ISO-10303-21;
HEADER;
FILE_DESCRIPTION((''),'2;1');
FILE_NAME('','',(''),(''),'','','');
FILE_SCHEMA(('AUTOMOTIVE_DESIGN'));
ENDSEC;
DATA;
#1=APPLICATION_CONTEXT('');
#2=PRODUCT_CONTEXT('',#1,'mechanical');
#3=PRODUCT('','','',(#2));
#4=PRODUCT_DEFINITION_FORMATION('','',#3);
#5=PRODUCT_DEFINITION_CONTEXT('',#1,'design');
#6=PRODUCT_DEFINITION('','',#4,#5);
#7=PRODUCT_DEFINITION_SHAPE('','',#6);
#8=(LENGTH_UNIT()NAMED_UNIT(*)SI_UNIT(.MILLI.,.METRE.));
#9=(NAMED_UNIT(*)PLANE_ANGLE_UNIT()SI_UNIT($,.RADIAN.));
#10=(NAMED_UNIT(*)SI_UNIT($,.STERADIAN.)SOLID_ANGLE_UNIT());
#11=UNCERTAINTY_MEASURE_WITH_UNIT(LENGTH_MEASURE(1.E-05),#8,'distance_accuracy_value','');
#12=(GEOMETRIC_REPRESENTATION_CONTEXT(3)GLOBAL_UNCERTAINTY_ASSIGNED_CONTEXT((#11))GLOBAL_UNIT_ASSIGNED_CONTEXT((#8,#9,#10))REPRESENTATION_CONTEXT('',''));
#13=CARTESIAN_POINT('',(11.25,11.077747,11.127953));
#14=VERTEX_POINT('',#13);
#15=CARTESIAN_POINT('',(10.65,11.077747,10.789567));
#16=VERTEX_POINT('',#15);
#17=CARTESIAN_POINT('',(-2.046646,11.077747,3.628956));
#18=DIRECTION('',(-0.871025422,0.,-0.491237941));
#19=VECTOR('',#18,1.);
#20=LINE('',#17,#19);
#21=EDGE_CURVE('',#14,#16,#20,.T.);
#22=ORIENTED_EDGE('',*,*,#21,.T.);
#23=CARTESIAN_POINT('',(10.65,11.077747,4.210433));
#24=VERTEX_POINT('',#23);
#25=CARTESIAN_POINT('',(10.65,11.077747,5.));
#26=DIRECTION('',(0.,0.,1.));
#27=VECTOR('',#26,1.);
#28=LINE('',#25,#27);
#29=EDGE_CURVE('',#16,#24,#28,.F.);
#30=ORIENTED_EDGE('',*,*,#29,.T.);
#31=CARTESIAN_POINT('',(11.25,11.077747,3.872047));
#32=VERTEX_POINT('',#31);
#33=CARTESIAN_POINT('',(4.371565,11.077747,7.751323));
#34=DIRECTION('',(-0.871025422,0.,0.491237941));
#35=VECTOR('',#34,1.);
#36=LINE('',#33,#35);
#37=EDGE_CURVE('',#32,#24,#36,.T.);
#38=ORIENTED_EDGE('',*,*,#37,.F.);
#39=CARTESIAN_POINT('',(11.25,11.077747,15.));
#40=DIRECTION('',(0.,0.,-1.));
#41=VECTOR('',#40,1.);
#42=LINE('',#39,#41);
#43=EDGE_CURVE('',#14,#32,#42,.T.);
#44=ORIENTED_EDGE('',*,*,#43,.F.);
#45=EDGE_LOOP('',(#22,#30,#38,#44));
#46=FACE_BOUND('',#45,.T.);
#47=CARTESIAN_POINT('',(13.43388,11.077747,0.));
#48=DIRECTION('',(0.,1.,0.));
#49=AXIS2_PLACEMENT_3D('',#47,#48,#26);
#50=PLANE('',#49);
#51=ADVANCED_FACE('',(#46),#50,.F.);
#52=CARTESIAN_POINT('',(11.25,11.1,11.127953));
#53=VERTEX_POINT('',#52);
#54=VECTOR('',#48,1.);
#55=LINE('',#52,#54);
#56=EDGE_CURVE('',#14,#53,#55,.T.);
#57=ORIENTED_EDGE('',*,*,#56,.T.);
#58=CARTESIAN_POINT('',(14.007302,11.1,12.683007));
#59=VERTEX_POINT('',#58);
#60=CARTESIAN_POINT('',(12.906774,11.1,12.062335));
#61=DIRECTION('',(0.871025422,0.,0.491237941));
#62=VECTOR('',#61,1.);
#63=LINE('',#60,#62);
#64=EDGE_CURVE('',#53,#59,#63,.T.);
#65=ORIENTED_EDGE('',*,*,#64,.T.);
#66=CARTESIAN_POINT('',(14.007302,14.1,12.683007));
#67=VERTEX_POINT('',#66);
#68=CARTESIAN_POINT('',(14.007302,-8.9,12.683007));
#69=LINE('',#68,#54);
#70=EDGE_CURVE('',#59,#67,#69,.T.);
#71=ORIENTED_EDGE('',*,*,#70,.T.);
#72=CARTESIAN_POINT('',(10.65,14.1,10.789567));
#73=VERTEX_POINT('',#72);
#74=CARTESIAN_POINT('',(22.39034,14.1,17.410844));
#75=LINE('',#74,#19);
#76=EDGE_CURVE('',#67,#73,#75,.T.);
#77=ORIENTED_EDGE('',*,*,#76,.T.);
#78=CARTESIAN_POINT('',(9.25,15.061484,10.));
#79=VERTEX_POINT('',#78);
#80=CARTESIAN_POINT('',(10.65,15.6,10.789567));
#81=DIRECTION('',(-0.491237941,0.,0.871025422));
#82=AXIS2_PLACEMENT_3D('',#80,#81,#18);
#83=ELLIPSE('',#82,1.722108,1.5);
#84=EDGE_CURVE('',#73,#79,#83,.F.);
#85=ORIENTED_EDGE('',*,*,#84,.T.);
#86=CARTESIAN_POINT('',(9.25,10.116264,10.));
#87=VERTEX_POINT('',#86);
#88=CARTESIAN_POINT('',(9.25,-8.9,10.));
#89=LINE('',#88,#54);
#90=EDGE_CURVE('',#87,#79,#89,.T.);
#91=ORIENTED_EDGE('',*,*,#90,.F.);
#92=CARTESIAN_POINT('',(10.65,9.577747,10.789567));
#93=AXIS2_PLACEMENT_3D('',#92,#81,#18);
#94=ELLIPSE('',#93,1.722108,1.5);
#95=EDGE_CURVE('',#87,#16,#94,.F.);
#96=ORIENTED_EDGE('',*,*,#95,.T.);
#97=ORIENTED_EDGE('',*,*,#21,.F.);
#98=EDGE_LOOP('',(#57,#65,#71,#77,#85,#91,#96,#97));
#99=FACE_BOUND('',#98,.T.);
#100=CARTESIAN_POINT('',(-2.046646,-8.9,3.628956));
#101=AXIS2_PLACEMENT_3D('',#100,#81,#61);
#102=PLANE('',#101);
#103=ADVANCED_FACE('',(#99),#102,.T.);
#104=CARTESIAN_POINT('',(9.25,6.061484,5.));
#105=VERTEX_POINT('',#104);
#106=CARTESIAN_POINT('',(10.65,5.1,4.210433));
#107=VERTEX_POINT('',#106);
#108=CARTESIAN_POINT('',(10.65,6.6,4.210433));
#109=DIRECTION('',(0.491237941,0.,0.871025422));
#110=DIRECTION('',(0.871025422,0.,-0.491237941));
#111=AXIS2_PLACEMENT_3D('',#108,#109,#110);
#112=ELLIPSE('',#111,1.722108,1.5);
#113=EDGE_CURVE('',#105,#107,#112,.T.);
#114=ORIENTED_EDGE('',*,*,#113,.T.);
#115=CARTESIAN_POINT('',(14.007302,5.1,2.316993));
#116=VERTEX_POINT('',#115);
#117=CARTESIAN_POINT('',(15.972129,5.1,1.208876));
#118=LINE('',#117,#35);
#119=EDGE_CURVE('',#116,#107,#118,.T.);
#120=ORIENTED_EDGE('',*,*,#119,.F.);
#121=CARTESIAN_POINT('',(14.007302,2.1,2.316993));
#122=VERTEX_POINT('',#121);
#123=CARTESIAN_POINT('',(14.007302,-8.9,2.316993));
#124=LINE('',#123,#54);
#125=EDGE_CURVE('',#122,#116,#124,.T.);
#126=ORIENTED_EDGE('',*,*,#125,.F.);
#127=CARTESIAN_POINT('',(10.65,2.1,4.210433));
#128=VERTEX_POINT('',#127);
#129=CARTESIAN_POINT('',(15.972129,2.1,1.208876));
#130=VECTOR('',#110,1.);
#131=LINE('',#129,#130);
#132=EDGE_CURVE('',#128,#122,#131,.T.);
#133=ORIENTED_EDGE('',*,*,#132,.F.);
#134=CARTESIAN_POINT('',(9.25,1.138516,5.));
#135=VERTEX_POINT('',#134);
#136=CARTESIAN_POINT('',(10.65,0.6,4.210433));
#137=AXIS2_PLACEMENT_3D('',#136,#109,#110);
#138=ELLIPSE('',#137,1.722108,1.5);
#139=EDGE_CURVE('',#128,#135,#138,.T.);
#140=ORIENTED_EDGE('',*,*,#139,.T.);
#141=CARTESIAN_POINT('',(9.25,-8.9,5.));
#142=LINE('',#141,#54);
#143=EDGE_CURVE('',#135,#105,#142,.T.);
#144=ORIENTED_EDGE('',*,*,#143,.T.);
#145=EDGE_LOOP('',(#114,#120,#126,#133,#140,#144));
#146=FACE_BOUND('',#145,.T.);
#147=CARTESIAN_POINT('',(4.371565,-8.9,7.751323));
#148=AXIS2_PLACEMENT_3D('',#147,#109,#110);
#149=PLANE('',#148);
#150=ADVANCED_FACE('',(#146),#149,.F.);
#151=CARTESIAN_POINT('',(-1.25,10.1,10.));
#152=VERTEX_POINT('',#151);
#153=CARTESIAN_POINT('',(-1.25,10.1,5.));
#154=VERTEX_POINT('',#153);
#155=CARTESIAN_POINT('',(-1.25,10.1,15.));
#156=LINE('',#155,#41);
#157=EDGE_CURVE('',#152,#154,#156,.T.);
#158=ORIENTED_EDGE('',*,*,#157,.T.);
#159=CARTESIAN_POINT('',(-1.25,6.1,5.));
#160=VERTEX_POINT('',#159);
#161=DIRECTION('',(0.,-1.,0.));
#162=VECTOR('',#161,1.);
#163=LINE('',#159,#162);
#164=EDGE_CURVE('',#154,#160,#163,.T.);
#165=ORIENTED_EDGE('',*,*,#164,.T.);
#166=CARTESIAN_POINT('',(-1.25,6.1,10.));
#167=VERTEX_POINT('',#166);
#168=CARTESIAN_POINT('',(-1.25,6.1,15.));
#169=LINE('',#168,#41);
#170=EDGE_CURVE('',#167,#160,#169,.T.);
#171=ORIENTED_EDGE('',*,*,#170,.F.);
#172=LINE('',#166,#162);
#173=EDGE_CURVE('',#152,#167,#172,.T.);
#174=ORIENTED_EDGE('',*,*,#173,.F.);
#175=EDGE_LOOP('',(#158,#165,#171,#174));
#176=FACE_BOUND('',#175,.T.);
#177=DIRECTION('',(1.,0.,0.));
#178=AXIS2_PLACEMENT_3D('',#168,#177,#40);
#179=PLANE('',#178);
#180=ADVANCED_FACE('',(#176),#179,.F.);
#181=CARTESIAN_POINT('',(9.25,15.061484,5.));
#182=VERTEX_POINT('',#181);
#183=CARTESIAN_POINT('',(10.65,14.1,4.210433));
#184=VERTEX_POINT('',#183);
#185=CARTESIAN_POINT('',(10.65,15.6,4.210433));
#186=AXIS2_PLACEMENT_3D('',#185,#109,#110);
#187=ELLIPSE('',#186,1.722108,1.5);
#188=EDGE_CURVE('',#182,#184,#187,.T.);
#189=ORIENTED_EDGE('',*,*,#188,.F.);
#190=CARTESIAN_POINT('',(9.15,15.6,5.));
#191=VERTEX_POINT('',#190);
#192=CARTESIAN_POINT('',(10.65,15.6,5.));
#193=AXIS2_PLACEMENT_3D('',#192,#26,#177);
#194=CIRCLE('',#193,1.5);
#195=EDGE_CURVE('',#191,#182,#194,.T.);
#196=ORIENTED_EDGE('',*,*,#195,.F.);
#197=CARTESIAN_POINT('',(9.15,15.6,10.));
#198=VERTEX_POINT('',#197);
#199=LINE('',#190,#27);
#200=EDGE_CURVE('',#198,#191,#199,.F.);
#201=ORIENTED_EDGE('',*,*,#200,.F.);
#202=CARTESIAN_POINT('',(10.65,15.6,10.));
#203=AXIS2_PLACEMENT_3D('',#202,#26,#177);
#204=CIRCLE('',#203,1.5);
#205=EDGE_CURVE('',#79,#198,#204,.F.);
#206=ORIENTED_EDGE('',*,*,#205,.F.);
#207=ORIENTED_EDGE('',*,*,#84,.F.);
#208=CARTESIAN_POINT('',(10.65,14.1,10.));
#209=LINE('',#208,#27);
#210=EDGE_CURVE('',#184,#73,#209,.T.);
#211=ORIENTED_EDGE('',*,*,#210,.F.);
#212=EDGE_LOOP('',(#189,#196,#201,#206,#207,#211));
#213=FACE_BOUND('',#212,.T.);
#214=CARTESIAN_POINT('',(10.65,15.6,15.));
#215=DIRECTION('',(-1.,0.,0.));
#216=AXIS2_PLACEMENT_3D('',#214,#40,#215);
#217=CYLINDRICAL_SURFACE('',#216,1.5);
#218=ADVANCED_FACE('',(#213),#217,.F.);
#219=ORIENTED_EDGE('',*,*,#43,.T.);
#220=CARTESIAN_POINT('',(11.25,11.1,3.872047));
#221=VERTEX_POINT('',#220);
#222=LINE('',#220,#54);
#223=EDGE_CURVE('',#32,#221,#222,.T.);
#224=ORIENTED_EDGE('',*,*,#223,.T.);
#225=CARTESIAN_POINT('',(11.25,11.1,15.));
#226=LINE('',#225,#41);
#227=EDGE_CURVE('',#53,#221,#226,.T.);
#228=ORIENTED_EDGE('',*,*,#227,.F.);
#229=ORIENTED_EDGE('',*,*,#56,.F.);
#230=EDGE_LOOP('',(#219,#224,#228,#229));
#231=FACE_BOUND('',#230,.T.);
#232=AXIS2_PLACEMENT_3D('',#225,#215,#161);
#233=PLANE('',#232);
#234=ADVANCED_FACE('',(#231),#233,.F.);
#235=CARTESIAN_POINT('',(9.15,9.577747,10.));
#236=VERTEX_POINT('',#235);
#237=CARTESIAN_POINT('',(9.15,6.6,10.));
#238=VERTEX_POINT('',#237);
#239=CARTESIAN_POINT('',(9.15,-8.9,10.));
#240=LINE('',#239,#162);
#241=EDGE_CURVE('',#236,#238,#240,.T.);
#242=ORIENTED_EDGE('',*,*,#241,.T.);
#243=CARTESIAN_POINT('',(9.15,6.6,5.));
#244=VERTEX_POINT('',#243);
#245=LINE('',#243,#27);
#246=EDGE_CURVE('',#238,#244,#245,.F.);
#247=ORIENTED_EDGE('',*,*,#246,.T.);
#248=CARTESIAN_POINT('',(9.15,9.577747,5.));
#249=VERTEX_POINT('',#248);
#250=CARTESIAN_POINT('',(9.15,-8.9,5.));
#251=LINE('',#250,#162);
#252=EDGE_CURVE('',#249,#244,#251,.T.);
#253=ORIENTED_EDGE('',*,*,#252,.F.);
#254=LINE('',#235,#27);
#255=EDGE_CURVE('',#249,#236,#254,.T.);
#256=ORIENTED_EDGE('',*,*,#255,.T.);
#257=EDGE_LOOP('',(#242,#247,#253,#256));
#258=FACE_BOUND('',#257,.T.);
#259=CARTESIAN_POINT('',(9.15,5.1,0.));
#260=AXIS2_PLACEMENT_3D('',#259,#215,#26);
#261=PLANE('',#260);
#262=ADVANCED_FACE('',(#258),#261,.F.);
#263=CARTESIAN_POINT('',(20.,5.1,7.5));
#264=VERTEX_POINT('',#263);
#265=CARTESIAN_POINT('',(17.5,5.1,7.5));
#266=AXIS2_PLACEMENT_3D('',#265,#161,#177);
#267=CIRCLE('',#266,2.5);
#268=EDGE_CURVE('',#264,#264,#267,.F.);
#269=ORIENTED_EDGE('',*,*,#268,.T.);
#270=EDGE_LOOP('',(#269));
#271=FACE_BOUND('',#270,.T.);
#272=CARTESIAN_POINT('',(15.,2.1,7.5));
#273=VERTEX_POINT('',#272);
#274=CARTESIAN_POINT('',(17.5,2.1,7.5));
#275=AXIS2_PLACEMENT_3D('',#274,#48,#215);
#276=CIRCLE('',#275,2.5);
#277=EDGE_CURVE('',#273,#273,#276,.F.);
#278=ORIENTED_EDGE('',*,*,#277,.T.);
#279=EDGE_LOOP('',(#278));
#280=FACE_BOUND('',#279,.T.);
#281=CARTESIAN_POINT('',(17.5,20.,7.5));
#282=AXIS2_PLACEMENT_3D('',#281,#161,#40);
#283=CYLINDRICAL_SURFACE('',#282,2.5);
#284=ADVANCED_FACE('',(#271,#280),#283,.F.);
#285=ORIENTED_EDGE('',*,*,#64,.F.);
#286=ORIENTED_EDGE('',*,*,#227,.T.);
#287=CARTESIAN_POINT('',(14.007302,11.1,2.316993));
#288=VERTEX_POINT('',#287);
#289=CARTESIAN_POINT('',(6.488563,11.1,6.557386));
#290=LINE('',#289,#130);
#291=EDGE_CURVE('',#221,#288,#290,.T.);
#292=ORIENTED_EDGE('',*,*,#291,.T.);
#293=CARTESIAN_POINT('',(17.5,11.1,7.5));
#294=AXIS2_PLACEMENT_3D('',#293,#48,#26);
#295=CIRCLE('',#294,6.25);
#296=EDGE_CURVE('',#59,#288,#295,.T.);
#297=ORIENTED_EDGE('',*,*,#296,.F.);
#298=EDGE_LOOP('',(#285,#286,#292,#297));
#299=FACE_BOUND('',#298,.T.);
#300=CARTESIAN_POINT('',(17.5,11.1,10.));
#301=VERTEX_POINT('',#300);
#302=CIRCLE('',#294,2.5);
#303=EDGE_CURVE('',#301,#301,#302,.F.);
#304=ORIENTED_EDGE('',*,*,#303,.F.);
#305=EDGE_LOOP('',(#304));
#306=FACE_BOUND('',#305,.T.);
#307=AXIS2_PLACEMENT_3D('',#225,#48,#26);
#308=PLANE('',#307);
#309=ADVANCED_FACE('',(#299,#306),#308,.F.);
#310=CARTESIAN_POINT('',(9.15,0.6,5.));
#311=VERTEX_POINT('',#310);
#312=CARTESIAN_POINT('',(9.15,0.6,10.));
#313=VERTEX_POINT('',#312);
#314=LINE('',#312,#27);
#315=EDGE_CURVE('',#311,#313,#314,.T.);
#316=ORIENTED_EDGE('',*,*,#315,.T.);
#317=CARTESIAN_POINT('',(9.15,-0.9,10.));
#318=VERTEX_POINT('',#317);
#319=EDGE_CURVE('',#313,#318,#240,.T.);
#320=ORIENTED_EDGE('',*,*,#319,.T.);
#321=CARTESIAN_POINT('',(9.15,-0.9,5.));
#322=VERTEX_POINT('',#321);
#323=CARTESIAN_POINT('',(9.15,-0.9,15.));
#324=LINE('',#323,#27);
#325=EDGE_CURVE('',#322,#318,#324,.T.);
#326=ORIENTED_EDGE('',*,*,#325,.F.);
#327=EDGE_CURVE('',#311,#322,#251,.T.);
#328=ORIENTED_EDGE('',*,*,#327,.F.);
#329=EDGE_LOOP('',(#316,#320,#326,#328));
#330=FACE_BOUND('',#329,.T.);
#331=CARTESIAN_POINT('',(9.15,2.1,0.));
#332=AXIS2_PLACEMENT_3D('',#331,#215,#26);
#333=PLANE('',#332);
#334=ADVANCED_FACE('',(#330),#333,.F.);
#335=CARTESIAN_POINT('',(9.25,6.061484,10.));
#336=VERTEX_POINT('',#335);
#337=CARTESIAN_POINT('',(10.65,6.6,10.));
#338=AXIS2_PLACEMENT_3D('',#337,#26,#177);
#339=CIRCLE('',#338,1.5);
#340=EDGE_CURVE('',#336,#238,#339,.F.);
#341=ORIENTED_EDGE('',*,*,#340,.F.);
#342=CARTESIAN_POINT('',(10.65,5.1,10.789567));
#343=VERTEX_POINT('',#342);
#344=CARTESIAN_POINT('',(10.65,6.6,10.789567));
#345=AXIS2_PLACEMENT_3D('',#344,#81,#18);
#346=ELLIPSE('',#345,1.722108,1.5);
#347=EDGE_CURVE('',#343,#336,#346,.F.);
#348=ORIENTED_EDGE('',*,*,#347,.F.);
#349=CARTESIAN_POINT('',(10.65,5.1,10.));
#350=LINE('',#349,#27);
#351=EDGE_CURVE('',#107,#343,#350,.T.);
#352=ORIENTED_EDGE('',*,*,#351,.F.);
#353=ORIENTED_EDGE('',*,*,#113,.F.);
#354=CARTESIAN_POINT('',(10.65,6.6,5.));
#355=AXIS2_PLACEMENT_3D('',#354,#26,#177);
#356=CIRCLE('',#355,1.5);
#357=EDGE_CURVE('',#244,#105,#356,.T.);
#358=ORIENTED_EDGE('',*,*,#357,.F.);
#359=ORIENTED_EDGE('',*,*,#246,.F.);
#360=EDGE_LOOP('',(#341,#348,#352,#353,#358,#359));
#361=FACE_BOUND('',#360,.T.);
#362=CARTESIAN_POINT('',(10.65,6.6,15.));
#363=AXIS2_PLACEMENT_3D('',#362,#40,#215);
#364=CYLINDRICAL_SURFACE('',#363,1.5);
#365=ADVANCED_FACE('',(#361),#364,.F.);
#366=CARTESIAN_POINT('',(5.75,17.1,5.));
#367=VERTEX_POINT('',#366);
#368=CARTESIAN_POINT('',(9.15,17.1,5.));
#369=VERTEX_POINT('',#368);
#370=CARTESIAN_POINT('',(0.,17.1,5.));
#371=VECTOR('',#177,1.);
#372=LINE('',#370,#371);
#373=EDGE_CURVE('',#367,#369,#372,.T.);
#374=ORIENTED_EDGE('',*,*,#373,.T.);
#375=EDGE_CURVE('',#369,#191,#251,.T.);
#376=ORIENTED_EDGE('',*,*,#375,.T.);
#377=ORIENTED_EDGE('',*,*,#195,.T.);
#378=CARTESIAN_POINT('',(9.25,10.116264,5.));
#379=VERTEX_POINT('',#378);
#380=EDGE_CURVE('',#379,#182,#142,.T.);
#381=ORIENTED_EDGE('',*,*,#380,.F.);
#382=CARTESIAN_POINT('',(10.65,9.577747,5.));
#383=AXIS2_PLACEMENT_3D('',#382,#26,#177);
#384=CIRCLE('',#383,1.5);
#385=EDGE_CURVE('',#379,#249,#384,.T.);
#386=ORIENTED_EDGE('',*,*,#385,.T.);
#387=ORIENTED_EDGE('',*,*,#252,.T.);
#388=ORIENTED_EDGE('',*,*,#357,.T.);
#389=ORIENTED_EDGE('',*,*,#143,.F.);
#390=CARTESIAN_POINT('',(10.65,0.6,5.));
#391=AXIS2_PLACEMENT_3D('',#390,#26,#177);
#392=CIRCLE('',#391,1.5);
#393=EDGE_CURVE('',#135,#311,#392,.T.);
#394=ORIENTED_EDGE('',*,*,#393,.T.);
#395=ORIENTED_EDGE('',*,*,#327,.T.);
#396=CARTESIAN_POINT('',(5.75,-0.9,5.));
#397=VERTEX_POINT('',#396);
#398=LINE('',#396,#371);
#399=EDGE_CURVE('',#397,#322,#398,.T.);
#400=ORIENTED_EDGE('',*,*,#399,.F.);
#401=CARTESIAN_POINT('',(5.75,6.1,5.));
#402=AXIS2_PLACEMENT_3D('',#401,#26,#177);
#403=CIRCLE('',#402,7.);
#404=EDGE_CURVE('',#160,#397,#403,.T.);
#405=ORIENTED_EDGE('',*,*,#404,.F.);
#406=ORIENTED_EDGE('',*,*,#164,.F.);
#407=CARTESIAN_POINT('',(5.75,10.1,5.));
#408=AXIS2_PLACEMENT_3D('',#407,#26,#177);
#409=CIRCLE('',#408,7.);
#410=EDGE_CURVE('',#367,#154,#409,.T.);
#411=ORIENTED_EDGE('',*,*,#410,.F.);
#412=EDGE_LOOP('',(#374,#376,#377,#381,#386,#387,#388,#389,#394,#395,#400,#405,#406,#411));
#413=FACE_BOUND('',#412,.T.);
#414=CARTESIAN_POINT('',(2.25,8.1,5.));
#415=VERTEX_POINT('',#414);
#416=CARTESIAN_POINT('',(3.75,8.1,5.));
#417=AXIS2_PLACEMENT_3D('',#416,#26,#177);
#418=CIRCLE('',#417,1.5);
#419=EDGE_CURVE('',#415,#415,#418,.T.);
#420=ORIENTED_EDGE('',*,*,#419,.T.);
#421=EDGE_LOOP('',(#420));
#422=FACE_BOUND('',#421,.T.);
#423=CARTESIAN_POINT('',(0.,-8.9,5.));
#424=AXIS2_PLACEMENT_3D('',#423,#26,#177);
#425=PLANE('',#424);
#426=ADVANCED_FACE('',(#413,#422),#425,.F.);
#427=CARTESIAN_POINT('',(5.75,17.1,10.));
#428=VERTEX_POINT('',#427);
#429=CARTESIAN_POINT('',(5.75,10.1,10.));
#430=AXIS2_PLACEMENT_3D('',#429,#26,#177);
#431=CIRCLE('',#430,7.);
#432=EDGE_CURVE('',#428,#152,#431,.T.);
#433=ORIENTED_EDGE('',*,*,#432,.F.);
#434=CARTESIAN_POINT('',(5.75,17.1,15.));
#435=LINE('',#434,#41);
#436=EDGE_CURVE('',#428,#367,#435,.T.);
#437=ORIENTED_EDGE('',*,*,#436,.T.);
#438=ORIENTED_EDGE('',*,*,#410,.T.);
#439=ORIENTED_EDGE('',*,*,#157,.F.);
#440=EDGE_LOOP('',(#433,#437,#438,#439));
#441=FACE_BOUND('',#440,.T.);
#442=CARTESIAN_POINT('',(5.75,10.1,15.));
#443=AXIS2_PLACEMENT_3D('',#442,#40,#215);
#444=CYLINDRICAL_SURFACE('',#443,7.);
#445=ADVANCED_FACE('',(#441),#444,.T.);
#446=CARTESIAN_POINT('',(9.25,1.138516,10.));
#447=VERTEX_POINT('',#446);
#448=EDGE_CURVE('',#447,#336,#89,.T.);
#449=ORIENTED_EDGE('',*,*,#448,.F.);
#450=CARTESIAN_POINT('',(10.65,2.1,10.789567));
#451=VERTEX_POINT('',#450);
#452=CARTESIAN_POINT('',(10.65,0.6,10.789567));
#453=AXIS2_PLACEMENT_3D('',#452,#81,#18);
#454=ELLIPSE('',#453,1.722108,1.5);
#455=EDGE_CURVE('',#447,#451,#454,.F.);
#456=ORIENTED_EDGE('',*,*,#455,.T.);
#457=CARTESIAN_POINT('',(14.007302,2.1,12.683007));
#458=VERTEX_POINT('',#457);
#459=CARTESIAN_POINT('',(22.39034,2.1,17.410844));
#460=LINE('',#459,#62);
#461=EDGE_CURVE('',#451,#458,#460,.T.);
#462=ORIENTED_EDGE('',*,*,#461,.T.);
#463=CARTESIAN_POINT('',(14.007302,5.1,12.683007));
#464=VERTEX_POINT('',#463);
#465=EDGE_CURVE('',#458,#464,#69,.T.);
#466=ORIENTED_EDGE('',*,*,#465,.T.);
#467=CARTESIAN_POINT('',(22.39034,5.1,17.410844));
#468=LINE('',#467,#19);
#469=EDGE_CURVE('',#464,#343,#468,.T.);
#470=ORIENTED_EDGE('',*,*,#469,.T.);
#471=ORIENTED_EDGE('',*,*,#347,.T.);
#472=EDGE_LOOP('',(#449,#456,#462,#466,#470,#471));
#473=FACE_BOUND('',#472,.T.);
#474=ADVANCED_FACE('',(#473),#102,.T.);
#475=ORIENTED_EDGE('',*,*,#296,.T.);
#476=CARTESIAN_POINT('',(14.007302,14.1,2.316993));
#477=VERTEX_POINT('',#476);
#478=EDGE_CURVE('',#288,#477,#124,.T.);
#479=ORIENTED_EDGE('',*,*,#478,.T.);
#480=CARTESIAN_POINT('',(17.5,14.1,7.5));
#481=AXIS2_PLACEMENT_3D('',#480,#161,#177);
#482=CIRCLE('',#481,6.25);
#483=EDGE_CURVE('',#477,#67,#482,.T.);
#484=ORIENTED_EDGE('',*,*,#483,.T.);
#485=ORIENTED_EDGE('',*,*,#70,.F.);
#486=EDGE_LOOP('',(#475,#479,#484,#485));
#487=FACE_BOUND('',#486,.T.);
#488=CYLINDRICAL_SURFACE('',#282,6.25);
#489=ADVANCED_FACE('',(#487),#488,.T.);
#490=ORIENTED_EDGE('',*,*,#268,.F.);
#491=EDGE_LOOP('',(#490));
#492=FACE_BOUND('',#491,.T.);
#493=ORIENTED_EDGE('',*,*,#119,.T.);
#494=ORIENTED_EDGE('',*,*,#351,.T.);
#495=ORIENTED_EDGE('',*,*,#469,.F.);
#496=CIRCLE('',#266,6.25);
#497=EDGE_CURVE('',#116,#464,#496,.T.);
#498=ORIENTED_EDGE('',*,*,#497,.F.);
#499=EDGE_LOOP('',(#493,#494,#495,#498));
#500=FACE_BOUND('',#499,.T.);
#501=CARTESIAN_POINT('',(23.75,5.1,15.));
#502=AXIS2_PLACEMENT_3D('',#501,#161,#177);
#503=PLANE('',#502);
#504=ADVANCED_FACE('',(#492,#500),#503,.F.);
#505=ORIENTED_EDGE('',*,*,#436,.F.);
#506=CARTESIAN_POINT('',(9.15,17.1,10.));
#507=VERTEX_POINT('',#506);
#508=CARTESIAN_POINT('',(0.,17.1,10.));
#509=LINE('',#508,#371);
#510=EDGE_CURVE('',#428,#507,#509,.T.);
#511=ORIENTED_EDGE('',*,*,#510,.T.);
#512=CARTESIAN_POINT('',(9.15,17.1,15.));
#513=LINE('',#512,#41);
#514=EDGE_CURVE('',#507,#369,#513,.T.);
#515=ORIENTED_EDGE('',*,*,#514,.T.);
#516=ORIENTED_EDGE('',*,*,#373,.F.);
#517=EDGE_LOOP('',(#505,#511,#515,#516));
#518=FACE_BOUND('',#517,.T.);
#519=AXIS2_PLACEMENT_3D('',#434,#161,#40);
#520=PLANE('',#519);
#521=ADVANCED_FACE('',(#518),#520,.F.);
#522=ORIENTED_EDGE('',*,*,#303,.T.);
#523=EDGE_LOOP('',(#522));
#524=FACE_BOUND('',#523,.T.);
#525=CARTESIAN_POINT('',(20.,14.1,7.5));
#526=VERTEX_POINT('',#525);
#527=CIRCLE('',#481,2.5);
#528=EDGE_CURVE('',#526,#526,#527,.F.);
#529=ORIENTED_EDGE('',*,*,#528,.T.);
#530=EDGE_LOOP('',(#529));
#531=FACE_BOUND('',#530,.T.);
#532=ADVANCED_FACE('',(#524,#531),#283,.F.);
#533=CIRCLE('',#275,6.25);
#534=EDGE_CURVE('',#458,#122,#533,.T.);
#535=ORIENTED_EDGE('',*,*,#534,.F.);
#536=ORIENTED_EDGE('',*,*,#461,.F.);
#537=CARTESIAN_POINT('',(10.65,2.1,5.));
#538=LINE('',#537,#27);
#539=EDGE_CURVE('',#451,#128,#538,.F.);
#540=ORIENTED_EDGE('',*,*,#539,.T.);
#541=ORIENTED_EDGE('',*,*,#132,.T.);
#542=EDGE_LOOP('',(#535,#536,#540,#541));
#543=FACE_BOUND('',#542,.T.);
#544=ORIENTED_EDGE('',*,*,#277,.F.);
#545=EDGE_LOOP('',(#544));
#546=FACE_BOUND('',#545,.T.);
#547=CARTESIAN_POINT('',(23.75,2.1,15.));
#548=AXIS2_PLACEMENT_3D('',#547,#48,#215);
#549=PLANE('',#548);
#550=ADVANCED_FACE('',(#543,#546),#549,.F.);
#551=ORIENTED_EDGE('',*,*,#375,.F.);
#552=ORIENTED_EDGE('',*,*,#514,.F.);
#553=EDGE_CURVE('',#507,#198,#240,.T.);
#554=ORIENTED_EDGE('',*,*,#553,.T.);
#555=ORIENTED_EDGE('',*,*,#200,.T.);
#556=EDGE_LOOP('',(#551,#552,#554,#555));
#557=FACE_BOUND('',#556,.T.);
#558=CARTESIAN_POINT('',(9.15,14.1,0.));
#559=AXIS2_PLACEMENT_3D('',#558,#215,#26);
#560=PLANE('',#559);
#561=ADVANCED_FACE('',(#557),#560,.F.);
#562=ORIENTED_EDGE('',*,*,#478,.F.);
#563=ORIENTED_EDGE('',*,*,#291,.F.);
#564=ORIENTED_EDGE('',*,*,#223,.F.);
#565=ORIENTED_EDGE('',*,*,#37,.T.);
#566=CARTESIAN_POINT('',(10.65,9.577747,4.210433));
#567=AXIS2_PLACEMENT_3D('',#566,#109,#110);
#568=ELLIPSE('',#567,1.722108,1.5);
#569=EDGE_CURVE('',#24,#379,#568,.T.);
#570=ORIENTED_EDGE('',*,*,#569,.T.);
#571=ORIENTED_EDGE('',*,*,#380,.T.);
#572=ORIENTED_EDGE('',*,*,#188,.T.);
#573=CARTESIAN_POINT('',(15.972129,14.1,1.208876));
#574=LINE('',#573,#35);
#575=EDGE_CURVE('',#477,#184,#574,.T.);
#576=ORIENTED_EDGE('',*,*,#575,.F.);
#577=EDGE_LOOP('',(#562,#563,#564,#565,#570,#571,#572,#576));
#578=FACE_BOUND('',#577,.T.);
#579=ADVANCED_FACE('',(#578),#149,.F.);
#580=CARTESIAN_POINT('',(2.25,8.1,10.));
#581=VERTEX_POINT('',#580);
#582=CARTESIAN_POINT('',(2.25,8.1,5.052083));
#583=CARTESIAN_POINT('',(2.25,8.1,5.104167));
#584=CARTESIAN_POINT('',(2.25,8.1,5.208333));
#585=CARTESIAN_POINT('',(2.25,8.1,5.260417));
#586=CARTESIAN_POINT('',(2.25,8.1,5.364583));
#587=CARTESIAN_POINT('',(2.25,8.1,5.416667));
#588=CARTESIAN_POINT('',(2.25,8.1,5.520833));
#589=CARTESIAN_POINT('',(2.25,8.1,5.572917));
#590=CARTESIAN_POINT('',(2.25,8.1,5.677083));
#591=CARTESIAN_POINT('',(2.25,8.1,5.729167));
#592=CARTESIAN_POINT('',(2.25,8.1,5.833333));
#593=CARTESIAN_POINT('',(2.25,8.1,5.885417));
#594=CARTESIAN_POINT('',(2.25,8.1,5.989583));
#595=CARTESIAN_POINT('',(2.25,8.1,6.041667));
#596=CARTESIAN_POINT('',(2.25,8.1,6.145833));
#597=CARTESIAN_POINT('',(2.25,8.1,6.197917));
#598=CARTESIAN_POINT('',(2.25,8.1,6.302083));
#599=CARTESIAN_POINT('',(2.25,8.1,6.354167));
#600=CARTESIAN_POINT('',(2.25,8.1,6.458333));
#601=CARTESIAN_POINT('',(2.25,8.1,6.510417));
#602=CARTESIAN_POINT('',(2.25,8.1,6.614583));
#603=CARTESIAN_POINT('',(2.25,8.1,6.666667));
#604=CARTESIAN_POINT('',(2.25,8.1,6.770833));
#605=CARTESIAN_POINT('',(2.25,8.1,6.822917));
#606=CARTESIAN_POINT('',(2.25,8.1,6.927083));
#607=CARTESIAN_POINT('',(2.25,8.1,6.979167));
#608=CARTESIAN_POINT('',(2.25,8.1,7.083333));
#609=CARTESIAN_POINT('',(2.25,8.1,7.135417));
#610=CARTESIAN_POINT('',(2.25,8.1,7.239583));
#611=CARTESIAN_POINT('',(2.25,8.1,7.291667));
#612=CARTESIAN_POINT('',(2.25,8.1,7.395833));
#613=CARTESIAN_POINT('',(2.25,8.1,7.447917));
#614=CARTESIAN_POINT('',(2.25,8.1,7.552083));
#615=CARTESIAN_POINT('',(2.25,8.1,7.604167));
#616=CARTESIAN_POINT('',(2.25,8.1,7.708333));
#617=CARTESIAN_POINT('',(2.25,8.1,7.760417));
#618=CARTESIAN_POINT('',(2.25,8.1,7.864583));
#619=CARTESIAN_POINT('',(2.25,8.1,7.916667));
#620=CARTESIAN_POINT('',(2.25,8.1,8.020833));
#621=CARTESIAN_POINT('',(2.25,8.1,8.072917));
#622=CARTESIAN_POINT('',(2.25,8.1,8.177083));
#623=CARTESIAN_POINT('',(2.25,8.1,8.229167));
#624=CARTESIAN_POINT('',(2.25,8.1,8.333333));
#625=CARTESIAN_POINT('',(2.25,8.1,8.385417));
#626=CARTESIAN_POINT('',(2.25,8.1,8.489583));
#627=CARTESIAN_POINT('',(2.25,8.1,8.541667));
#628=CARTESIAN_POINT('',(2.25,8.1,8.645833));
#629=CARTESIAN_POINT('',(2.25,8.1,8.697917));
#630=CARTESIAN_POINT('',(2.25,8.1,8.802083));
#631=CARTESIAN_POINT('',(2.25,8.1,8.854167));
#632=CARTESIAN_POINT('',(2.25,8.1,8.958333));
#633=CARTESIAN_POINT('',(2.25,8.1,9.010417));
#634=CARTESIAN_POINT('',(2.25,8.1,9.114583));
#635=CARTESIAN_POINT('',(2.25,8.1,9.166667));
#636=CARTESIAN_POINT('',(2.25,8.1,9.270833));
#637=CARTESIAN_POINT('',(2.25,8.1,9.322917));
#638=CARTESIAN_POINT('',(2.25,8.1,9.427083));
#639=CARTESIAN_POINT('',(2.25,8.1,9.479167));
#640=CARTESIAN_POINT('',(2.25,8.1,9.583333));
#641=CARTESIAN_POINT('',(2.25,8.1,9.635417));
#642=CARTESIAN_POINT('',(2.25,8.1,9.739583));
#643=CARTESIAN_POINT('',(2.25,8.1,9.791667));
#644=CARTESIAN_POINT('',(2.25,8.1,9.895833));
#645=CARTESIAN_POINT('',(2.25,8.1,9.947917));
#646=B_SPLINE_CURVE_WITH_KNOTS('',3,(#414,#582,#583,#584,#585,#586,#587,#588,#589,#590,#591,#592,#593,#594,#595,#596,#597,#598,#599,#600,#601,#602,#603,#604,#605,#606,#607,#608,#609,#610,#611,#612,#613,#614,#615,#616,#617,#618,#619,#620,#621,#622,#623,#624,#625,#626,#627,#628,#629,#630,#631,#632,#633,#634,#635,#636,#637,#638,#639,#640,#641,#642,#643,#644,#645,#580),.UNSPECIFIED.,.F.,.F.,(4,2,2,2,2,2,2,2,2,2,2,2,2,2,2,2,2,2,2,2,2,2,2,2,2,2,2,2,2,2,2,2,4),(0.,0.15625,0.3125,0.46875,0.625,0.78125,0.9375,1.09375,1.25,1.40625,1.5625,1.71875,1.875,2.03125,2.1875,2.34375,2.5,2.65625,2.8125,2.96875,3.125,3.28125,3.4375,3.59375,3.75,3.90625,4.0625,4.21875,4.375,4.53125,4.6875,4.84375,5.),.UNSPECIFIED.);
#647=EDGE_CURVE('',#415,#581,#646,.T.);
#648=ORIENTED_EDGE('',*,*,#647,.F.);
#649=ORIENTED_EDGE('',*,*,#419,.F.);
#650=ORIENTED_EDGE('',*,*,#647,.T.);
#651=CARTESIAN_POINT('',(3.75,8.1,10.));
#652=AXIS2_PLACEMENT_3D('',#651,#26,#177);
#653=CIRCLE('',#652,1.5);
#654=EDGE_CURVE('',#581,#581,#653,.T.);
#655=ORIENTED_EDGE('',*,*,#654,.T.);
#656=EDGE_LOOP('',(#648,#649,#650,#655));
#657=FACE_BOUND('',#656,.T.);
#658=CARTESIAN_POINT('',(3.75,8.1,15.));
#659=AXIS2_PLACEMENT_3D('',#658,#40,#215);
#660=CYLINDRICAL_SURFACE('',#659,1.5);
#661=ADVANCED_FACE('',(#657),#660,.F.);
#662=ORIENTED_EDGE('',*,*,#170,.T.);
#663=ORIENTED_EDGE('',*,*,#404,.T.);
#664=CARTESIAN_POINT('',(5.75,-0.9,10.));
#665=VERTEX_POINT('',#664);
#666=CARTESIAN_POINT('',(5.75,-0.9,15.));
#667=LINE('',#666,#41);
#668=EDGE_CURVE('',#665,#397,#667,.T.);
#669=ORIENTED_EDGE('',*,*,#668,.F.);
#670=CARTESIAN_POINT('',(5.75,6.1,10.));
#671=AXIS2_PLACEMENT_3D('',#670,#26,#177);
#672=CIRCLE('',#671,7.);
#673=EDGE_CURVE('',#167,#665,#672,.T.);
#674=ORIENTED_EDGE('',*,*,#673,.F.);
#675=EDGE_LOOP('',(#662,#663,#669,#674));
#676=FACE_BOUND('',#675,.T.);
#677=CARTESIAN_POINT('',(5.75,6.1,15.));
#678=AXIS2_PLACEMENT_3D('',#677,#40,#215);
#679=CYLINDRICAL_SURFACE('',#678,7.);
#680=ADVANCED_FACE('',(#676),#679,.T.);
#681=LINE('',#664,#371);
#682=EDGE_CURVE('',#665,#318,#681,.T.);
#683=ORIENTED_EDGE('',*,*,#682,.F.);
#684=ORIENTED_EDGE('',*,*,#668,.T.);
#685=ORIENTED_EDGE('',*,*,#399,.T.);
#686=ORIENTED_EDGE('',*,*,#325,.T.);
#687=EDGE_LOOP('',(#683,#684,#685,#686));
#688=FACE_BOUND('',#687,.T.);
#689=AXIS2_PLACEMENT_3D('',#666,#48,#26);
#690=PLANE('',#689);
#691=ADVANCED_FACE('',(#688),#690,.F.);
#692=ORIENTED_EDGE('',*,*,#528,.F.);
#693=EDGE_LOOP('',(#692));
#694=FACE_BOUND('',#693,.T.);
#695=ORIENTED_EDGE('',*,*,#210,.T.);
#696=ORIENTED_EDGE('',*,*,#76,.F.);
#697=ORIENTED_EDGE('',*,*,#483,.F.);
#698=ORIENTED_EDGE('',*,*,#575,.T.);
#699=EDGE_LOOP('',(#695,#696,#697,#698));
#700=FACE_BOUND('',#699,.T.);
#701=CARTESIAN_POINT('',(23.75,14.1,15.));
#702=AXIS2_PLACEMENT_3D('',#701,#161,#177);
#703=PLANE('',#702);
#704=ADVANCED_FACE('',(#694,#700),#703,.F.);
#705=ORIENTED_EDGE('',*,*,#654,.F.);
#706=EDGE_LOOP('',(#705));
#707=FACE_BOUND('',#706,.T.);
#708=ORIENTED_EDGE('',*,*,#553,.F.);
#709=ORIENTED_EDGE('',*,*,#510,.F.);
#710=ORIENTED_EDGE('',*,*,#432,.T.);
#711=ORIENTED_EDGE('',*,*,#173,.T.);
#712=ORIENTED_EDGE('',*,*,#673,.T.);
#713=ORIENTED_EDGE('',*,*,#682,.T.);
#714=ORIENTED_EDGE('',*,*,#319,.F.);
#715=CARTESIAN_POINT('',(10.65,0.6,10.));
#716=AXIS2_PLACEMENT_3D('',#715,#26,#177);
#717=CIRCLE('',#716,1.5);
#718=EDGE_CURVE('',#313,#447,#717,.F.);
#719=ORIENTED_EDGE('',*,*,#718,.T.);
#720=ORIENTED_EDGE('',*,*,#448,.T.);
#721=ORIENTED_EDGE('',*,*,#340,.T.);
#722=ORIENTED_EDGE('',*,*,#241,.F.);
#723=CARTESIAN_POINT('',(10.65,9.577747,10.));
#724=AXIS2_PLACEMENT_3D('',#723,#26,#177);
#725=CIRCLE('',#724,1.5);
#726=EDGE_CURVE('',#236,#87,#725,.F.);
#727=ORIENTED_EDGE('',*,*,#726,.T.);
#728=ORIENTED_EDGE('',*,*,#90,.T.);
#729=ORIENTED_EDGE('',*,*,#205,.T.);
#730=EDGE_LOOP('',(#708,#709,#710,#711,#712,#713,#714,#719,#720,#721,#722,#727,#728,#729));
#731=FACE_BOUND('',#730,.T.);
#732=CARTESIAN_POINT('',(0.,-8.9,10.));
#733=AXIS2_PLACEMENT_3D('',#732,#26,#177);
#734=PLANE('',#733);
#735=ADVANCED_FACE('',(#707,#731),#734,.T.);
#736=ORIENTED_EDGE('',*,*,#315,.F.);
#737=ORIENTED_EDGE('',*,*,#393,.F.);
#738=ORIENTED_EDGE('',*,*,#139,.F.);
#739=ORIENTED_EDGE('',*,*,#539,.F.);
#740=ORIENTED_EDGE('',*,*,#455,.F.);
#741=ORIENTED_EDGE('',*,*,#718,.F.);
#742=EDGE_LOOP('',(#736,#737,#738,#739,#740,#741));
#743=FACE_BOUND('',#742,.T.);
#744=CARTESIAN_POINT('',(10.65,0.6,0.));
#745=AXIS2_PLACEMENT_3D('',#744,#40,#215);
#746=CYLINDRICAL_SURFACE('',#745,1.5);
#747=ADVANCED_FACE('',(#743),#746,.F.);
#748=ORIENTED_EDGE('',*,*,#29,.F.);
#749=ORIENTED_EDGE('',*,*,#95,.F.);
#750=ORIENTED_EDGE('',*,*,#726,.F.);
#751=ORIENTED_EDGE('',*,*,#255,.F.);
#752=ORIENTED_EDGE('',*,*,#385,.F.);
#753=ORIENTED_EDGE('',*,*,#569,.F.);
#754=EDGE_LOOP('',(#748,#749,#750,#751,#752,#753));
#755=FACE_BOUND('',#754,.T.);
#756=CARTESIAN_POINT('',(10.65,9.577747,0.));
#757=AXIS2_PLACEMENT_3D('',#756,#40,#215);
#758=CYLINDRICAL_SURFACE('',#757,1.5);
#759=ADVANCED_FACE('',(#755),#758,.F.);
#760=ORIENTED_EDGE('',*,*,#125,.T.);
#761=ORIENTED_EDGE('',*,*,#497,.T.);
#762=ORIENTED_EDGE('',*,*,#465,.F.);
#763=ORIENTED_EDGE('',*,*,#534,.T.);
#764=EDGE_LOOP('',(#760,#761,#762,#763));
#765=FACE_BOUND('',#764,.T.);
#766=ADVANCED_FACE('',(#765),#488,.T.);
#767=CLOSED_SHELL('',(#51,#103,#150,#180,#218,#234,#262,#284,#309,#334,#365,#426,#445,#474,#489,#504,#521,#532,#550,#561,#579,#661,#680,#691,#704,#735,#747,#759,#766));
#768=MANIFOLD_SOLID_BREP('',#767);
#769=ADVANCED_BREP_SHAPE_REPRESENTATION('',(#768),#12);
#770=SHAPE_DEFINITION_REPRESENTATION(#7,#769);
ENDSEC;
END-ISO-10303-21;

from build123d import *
from build123d.topology import SkipClean

# Parameters (mm, degrees)
CROQUIS1_R              = 1.5
SALIENTE_EXTRUIR1_DEPTH = 15
CROQUIS2_R              = 2.5
CORTAR_EXTRUIR1_DEPTH   = 20
CORTAR_EXTRUIR2_START   = -26
CORTAR_EXTRUIR2_DEPTH   = 26
CROQUIS5_W              = 3.971897385
CROQUIS5_H              = 3.395681121
CROQUIS5_W_2            = 4.283880282
CROQUIS5_H_2            = 5.977747231
CROQUIS5_W_3            = 4.50146752
CROQUIS5_H_3            = 3.991827506
CORTAR_EXTRUIR5_DEPTH   = 10
REDONDEO1_R             = 1.5


with BuildPart() as part:
    # Croquis1 → Saliente-Extruir1 (new body)
    with BuildSketch(Plane.XY):
        with BuildLine():
            Line((11.25, 17.1), (11.25, 14.1))
            Line((11.25, 14.1), (23.75, 14.1))
            Line((23.75, 14.1), (23.75, 11.1))
            Line((23.75, 11.1), (11.25, 11.1))
            Line((11.25, 11.1), (11.25, 5.1))
            Line((11.25, 5.1), (23.75, 5.1))
            Line((23.75, 5.1), (23.75, 2.1))
            Line((23.75, 2.1), (11.25, 2.1))
            Line((11.25, 2.1), (11.25, -0.9))
            Line((11.25, -0.9), (5.75, -0.9))
            ThreePointArc((5.75, -0.9), (0.800252532, 1.150252532), (-1.25, 6.1))
            Line((-1.25, 6.1), (-1.25, 10.1))
            ThreePointArc((-1.25, 10.1), (0.800252532, 15.049747468), (5.75, 17.1))
            Line((5.75, 17.1), (11.25, 17.1))
        make_face()
        with Locations((3.75, 8.1)):
            Circle(CROQUIS1_R, mode=Mode.SUBTRACT)
    extrude(amount=SALIENTE_EXTRUIR1_DEPTH)

    # Croquis2 → Cortar-Extruir1 (cut)
    with BuildSketch(Plane(origin=(0, 0, 0), x_dir=(1, 0, 0), z_dir=(0, 1, 0))):
        with Locations((17.5, -7.5)):
            Circle(CROQUIS2_R)
        with BuildLine():
            Line((17.5, -1.25), (11.25, 0))
            Line((11.25, 0), (11.126279301, 1.868603497))
            Line((11.126279301, 1.868603497), (29.663453957, 1.868603497))
            Line((29.663453957, 1.868603497), (29.663453957, -17.961269996))
            Line((29.663453957, -17.961269996), (11.25, -17.961269996))
            Line((11.25, -17.961269996), (11.25, -15))
            Line((11.25, -15), (17.5, -13.75))
            ThreePointArc((17.5, -13.75), (23.75, -7.5), (17.5, -1.25))
        make_face()
    extrude(amount=CORTAR_EXTRUIR1_DEPTH, mode=Mode.SUBTRACT)

    # Croquis4 → Cortar-Extruir2 (cut)
    with SkipClean():  # the faces are left unmerged after this step: merging them gives an invalid solid
        with BuildSketch(Plane(origin=(0, 17.1, 0), x_dir=(1, 0, 0), z_dir=(0, 1, 0)).offset(CORTAR_EXTRUIR2_START)):
            with BuildLine():
                Line((-4.389645589, -10), (9.25, -10))
                Line((9.25, -10), (14.007302121, -12.683006997))
                ThreePointArc((14.007302121, -12.683006997), (15.673978879, -13.477302641), (17.5, -13.75))
                Line((17.5, -13.75), (17.5, -16.45653889))
                Line((17.5, -16.45653889), (-4.389645589, -16.45653889))
                Line((-4.389645589, -16.45653889), (-4.389645589, -10))
            make_face()
            with BuildLine():
                Line((9.25, -5), (14.007302121, -2.316993003))
                ThreePointArc((14.007302121, -2.316993003), (15.673978879, -1.522697359), (17.5, -1.25))
                Line((17.5, -1.25), (17.5, 1.887707064))
                Line((17.5, 1.887707064), (-4.389645589, 1.887707064))
                Line((-4.389645589, 1.887707064), (-4.389645589, -5))
                Line((-4.389645589, -5), (9.25, -5))
            make_face()
        extrude(amount=CORTAR_EXTRUIR2_DEPTH, mode=Mode.SUBTRACT)

    # Croquis5 → Cortar-Extruir5 (cut, symmetric)
    with SkipClean():  # the faces are left unmerged after this step: merging them gives an invalid solid
        with BuildSketch(Plane.XY.offset(10)):
            with Locations((11.135948693, 15.797840561)):
                Rectangle(CROQUIS5_W, CROQUIS5_H)
            with Locations((11.291940141, 8.088873616)):
                Rectangle(CROQUIS5_W_2, CROQUIS5_H_2)
            with Locations((11.40073376, 0.104086247)):
                Rectangle(CROQUIS5_W_3, CROQUIS5_H_3)
        extrude(amount=CORTAR_EXTRUIR5_DEPTH, both=True, mode=Mode.SUBTRACT)

    # Redondeo1
    # the kernel refuses this fillet: 1.5 mm, written as the material it adds along each edge
    with BuildSketch(Plane(origin=(9.15, 2.1, 1.25), x_dir=(0, -1, 0), z_dir=(0, 0, 1))) as redondeo1_piece_1_section:
        with BuildLine():
            CenterArc((REDONDEO1_R, REDONDEO1_R), REDONDEO1_R, 180, 90)
            Line((0, REDONDEO1_R), (0, 0))
            Line((0, 0), (REDONDEO1_R, 0))
        make_face()
    redondeo1_piece_1 = extrude(amount=8.75, mode=Mode.PRIVATE)
    redondeo1_piece_1 = split(redondeo1_piece_1, bisect_by=Plane(origin=(9.866987005, 1.973706672, 5), z_dir=(0, 0, -1)), keep=Keep.TOP, mode=Mode.PRIVATE)
    redondeo1_piece_1 = split(redondeo1_piece_1, bisect_by=Plane(origin=(9.792542983, 1.973706672, 4.694018462), z_dir=(0.4912379413342998, 0, 0.8710254215541813)), keep=Keep.TOP, mode=Mode.PRIVATE)
    add(redondeo1_piece_1)
    with BuildSketch(Plane(origin=(9.15, 2.1, 5), x_dir=(0, -1, 0), z_dir=(0, 0, 1))) as redondeo1_piece_2_section:
        with BuildLine():
            CenterArc((REDONDEO1_R, REDONDEO1_R), REDONDEO1_R, 180, 90)
            Line((0, REDONDEO1_R), (0, 0))
            Line((0, 0), (REDONDEO1_R, 0))
        make_face()
    redondeo1_piece_2 = extrude(amount=5, mode=Mode.PRIVATE)
    redondeo1_piece_2 = split(redondeo1_piece_2, bisect_by=Plane(origin=(9.170520701, 1.440228568, 5.044824463), z_dir=(-0.4912379413342998, 0, -0.8710254215541813)), keep=Keep.TOP, mode=Mode.PRIVATE)
    add(redondeo1_piece_2)
    with BuildSketch(Plane(origin=(9.15, 2.1, 5), x_dir=(0, -1, 0), z_dir=(0, 0, 1))) as redondeo1_piece_3_section:
        with BuildLine():
            CenterArc((REDONDEO1_R, REDONDEO1_R), REDONDEO1_R, 180, 90)
            Line((0, REDONDEO1_R), (0, 0))
            Line((0, 0), (REDONDEO1_R, 0))
        make_face()
    redondeo1_piece_3 = extrude(amount=5, mode=Mode.PRIVATE)
    redondeo1_piece_3 = split(redondeo1_piece_3, bisect_by=Plane(origin=(8.363208573, 1.761858884, 5.500129599), z_dir=(0.4912379413342998, 0, 0.8710254215541813)), keep=Keep.TOP, mode=Mode.PRIVATE)
    redondeo1_piece_3 = split(redondeo1_piece_3, bisect_by=Plane(origin=(8.363208573, 1.761858884, 9.499870401), z_dir=(0.4912379413342999, 0, -0.8710254215541812)), keep=Keep.TOP, mode=Mode.PRIVATE)
    add(redondeo1_piece_3)
    with BuildSketch(Plane(origin=(9.15, 2.1, 5), x_dir=(0, -1, 0), z_dir=(0, 0, 1))) as redondeo1_piece_4_section:
        with BuildLine():
            CenterArc((REDONDEO1_R, REDONDEO1_R), REDONDEO1_R, 180, 90)
            Line((0, REDONDEO1_R), (0, 0))
            Line((0, 0), (REDONDEO1_R, 0))
        make_face()
    redondeo1_piece_4 = extrude(amount=8.75, mode=Mode.PRIVATE)
    redondeo1_piece_4 = split(redondeo1_piece_4, bisect_by=Plane(origin=(9.866987005, 1.973706672, 10), z_dir=(0, 0, 1)), keep=Keep.TOP, mode=Mode.PRIVATE)
    redondeo1_piece_4 = split(redondeo1_piece_4, bisect_by=Plane(origin=(9.792542983, 1.973706672, 10.305981538), z_dir=(0.4912379413342999, 0, -0.8710254215541812)), keep=Keep.TOP, mode=Mode.PRIVATE)
    add(redondeo1_piece_4)
    with BuildSketch(Plane(origin=(9.15, 2.1, 5), x_dir=(0, -1, 0), z_dir=(0, 0, 1))) as redondeo1_piece_5_section:
        with BuildLine():
            CenterArc((REDONDEO1_R, REDONDEO1_R), REDONDEO1_R, 180, 90)
            Line((0, REDONDEO1_R), (0, 0))
            Line((0, 0), (REDONDEO1_R, 0))
        make_face()
    redondeo1_piece_5 = extrude(amount=5, mode=Mode.PRIVATE)
    redondeo1_piece_5 = split(redondeo1_piece_5, bisect_by=Plane(origin=(9.170520701, 1.440228568, 9.955175537), z_dir=(-0.4912379413342999, 0, 0.8710254215541812)), keep=Keep.TOP, mode=Mode.PRIVATE)
    add(redondeo1_piece_5)
    with BuildSketch(Plane(origin=(9.15, 5.1, 10), x_dir=(1, 0, 0), z_dir=(0, 0, -1))) as redondeo1_piece_6_section:
        with BuildLine():
            CenterArc((REDONDEO1_R, -REDONDEO1_R), REDONDEO1_R, 90, 90)
            Line((0, -REDONDEO1_R), (0, 0))
            Line((0, 0), (REDONDEO1_R, 0))
        make_face()
    redondeo1_piece_6 = extrude(amount=5, mode=Mode.PRIVATE)
    redondeo1_piece_6 = split(redondeo1_piece_6, bisect_by=Plane(origin=(9.170520704, 5.759771469, 9.955175538), z_dir=(-0.4912379413342999, 0, 0.8710254215541812)), keep=Keep.TOP, mode=Mode.PRIVATE)
    add(redondeo1_piece_6)
    with BuildSketch(Plane(origin=(9.15, 5.1, 13.75), x_dir=(1, 0, 0), z_dir=(0, 0, -1))) as redondeo1_piece_7_section:
        with BuildLine():
            CenterArc((REDONDEO1_R, -REDONDEO1_R), REDONDEO1_R, 90, 90)
            Line((0, -REDONDEO1_R), (0, 0))
            Line((0, 0), (REDONDEO1_R, 0))
        make_face()
    redondeo1_piece_7 = extrude(amount=8.75, mode=Mode.PRIVATE)
    redondeo1_piece_7 = split(redondeo1_piece_7, bisect_by=Plane(origin=(9.866987013, 5.226293308, 10), z_dir=(0, 0, 1)), keep=Keep.TOP, mode=Mode.PRIVATE)
    redondeo1_piece_7 = split(redondeo1_piece_7, bisect_by=Plane(origin=(9.792542992, 5.226293308, 10.305981543), z_dir=(0.4912379413342999, 0, -0.8710254215541812)), keep=Keep.TOP, mode=Mode.PRIVATE)
    add(redondeo1_piece_7)
    with BuildSketch(Plane(origin=(9.15, 5.1, 10), x_dir=(1, 0, 0), z_dir=(0, 0, -1))) as redondeo1_piece_8_section:
        with BuildLine():
            CenterArc((REDONDEO1_R, -REDONDEO1_R), REDONDEO1_R, 90, 90)
            Line((0, -REDONDEO1_R), (0, 0))
            Line((0, 0), (REDONDEO1_R, 0))
        make_face()
    redondeo1_piece_8 = extrude(amount=5, mode=Mode.PRIVATE)
    redondeo1_piece_8 = split(redondeo1_piece_8, bisect_by=Plane(origin=(8.363208574, 5.438141117, 5.500129598), z_dir=(0.4912379413342998, 0, 0.8710254215541813)), keep=Keep.TOP, mode=Mode.PRIVATE)
    redondeo1_piece_8 = split(redondeo1_piece_8, bisect_by=Plane(origin=(8.363208574, 5.438141117, 9.499870402), z_dir=(0.4912379413342999, 0, -0.8710254215541812)), keep=Keep.TOP, mode=Mode.PRIVATE)
    add(redondeo1_piece_8)
    with BuildSketch(Plane(origin=(9.15, 5.1, 10), x_dir=(1, 0, 0), z_dir=(0, 0, -1))) as redondeo1_piece_9_section:
        with BuildLine():
            CenterArc((REDONDEO1_R, -REDONDEO1_R), REDONDEO1_R, 90, 90)
            Line((0, -REDONDEO1_R), (0, 0))
            Line((0, 0), (REDONDEO1_R, 0))
        make_face()
    redondeo1_piece_9 = extrude(amount=5, mode=Mode.PRIVATE)
    redondeo1_piece_9 = split(redondeo1_piece_9, bisect_by=Plane(origin=(9.170520704, 5.759771469, 5.044824462), z_dir=(-0.4912379413342998, 0, -0.8710254215541813)), keep=Keep.TOP, mode=Mode.PRIVATE)
    add(redondeo1_piece_9)
    with BuildSketch(Plane(origin=(9.15, 5.1, 10), x_dir=(1, 0, 0), z_dir=(0, 0, -1))) as redondeo1_piece_10_section:
        with BuildLine():
            CenterArc((REDONDEO1_R, -REDONDEO1_R), REDONDEO1_R, 90, 90)
            Line((0, -REDONDEO1_R), (0, 0))
            Line((0, 0), (REDONDEO1_R, 0))
        make_face()
    redondeo1_piece_10 = extrude(amount=8.75, mode=Mode.PRIVATE)
    redondeo1_piece_10 = split(redondeo1_piece_10, bisect_by=Plane(origin=(9.866987013, 5.226293308, 5), z_dir=(0, 0, -1)), keep=Keep.TOP, mode=Mode.PRIVATE)
    redondeo1_piece_10 = split(redondeo1_piece_10, bisect_by=Plane(origin=(9.792542992, 5.226293308, 4.694018457), z_dir=(0.4912379413342998, 0, 0.8710254215541813)), keep=Keep.TOP, mode=Mode.PRIVATE)
    add(redondeo1_piece_10)
    with BuildSketch(Plane(origin=(9.15, 11.077747231, 13.75), x_dir=(0, -1, 0), z_dir=(0, 0, -1))) as redondeo1_piece_11_section:
        with BuildLine():
            CenterArc((REDONDEO1_R, -REDONDEO1_R), REDONDEO1_R, 90, 90)
            Line((0, -REDONDEO1_R), (0, 0))
            Line((0, 0), (REDONDEO1_R, 0))
        make_face()
    redondeo1_piece_11 = extrude(amount=8.75, mode=Mode.PRIVATE)
    redondeo1_piece_11 = split(redondeo1_piece_11, bisect_by=Plane(origin=(9.866987005, 10.951453903, 10), z_dir=(0, 0, 1)), keep=Keep.TOP, mode=Mode.PRIVATE)
    redondeo1_piece_11 = split(redondeo1_piece_11, bisect_by=Plane(origin=(9.792542983, 10.951453903, 10.305981538), z_dir=(0.4912379413342999, 0, -0.8710254215541812)), keep=Keep.TOP, mode=Mode.PRIVATE)
    add(redondeo1_piece_11)
    with BuildSketch(Plane(origin=(9.15, 11.077747231, 10), x_dir=(0, -1, 0), z_dir=(0, 0, -1))) as redondeo1_piece_12_section:
        with BuildLine():
            CenterArc((REDONDEO1_R, -REDONDEO1_R), REDONDEO1_R, 90, 90)
            Line((0, -REDONDEO1_R), (0, 0))
            Line((0, 0), (REDONDEO1_R, 0))
        make_face()
    redondeo1_piece_12 = extrude(amount=5, mode=Mode.PRIVATE)
    redondeo1_piece_12 = split(redondeo1_piece_12, bisect_by=Plane(origin=(9.170520701, 10.417975799, 9.955175537), z_dir=(-0.4912379413342999, 0, 0.8710254215541812)), keep=Keep.TOP, mode=Mode.PRIVATE)
    add(redondeo1_piece_12)
    with BuildSketch(Plane(origin=(9.15, 11.077747231, 10), x_dir=(0, -1, 0), z_dir=(0, 0, -1))) as redondeo1_piece_13_section:
        with BuildLine():
            CenterArc((REDONDEO1_R, -REDONDEO1_R), REDONDEO1_R, 90, 90)
            Line((0, -REDONDEO1_R), (0, 0))
            Line((0, 0), (REDONDEO1_R, 0))
        make_face()
    redondeo1_piece_13 = extrude(amount=5, mode=Mode.PRIVATE)
    redondeo1_piece_13 = split(redondeo1_piece_13, bisect_by=Plane(origin=(8.363208573, 10.739606115, 9.499870401), z_dir=(0.4912379413342999, 0, -0.8710254215541812)), keep=Keep.TOP, mode=Mode.PRIVATE)
    redondeo1_piece_13 = split(redondeo1_piece_13, bisect_by=Plane(origin=(8.363208573, 10.739606115, 5.500129599), z_dir=(0.4912379413342998, 0, 0.8710254215541813)), keep=Keep.TOP, mode=Mode.PRIVATE)
    add(redondeo1_piece_13)
    with BuildSketch(Plane(origin=(9.15, 11.077747231, 10), x_dir=(0, -1, 0), z_dir=(0, 0, -1))) as redondeo1_piece_14_section:
        with BuildLine():
            CenterArc((REDONDEO1_R, -REDONDEO1_R), REDONDEO1_R, 90, 90)
            Line((0, -REDONDEO1_R), (0, 0))
            Line((0, 0), (REDONDEO1_R, 0))
        make_face()
    redondeo1_piece_14 = extrude(amount=8.75, mode=Mode.PRIVATE)
    redondeo1_piece_14 = split(redondeo1_piece_14, bisect_by=Plane(origin=(9.866987005, 10.951453903, 5), z_dir=(0, 0, -1)), keep=Keep.TOP, mode=Mode.PRIVATE)
    redondeo1_piece_14 = split(redondeo1_piece_14, bisect_by=Plane(origin=(9.792542983, 10.951453903, 4.694018462), z_dir=(0.4912379413342998, 0, 0.8710254215541813)), keep=Keep.TOP, mode=Mode.PRIVATE)
    add(redondeo1_piece_14)
    with BuildSketch(Plane(origin=(9.15, 11.077747231, 10), x_dir=(0, -1, 0), z_dir=(0, 0, -1))) as redondeo1_piece_15_section:
        with BuildLine():
            CenterArc((REDONDEO1_R, -REDONDEO1_R), REDONDEO1_R, 90, 90)
            Line((0, -REDONDEO1_R), (0, 0))
            Line((0, 0), (REDONDEO1_R, 0))
        make_face()
    redondeo1_piece_15 = extrude(amount=5, mode=Mode.PRIVATE)
    redondeo1_piece_15 = split(redondeo1_piece_15, bisect_by=Plane(origin=(9.170520701, 10.417975799, 5.044824463), z_dir=(-0.4912379413342998, 0, -0.8710254215541813)), keep=Keep.TOP, mode=Mode.PRIVATE)
    add(redondeo1_piece_15)
    with BuildSketch(Plane(origin=(9.15, 14.1, 10), x_dir=(1, 0, 0), z_dir=(0, 0, -1))) as redondeo1_piece_16_section:
        with BuildLine():
            CenterArc((REDONDEO1_R, -REDONDEO1_R), REDONDEO1_R, 90, 90)
            Line((0, -REDONDEO1_R), (0, 0))
            Line((0, 0), (REDONDEO1_R, 0))
        make_face()
    redondeo1_piece_16 = extrude(amount=5, mode=Mode.PRIVATE)
    redondeo1_piece_16 = split(redondeo1_piece_16, bisect_by=Plane(origin=(9.170520704, 14.759771469, 9.955175538), z_dir=(-0.4912379413342999, 0, 0.8710254215541812)), keep=Keep.TOP, mode=Mode.PRIVATE)
    add(redondeo1_piece_16)
    with BuildSketch(Plane(origin=(9.15, 14.1, 13.75), x_dir=(1, 0, 0), z_dir=(0, 0, -1))) as redondeo1_piece_17_section:
        with BuildLine():
            CenterArc((REDONDEO1_R, -REDONDEO1_R), REDONDEO1_R, 90, 90)
            Line((0, -REDONDEO1_R), (0, 0))
            Line((0, 0), (REDONDEO1_R, 0))
        make_face()
    redondeo1_piece_17 = extrude(amount=8.75, mode=Mode.PRIVATE)
    redondeo1_piece_17 = split(redondeo1_piece_17, bisect_by=Plane(origin=(9.866987013, 14.226293308, 10), z_dir=(0, 0, 1)), keep=Keep.TOP, mode=Mode.PRIVATE)
    redondeo1_piece_17 = split(redondeo1_piece_17, bisect_by=Plane(origin=(9.792542992, 14.226293308, 10.305981543), z_dir=(0.4912379413342999, 0, -0.8710254215541812)), keep=Keep.TOP, mode=Mode.PRIVATE)
    add(redondeo1_piece_17)
    with BuildSketch(Plane(origin=(9.15, 14.1, 10), x_dir=(1, 0, 0), z_dir=(0, 0, -1))) as redondeo1_piece_18_section:
        with BuildLine():
            CenterArc((REDONDEO1_R, -REDONDEO1_R), REDONDEO1_R, 90, 90)
            Line((0, -REDONDEO1_R), (0, 0))
            Line((0, 0), (REDONDEO1_R, 0))
        make_face()
    redondeo1_piece_18 = extrude(amount=5, mode=Mode.PRIVATE)
    redondeo1_piece_18 = split(redondeo1_piece_18, bisect_by=Plane(origin=(8.363208574, 14.438141117, 5.500129598), z_dir=(0.4912379413342998, 0, 0.8710254215541813)), keep=Keep.TOP, mode=Mode.PRIVATE)
    redondeo1_piece_18 = split(redondeo1_piece_18, bisect_by=Plane(origin=(8.363208574, 14.438141117, 9.499870402), z_dir=(0.4912379413342999, 0, -0.8710254215541812)), keep=Keep.TOP, mode=Mode.PRIVATE)
    add(redondeo1_piece_18)
    with BuildSketch(Plane(origin=(9.15, 14.1, 10), x_dir=(1, 0, 0), z_dir=(0, 0, -1))) as redondeo1_piece_19_section:
        with BuildLine():
            CenterArc((REDONDEO1_R, -REDONDEO1_R), REDONDEO1_R, 90, 90)
            Line((0, -REDONDEO1_R), (0, 0))
            Line((0, 0), (REDONDEO1_R, 0))
        make_face()
    redondeo1_piece_19 = extrude(amount=5, mode=Mode.PRIVATE)
    redondeo1_piece_19 = split(redondeo1_piece_19, bisect_by=Plane(origin=(9.170520704, 14.759771469, 5.044824462), z_dir=(-0.4912379413342998, 0, -0.8710254215541813)), keep=Keep.TOP, mode=Mode.PRIVATE)
    add(redondeo1_piece_19)
    with BuildSketch(Plane(origin=(9.15, 14.1, 10), x_dir=(1, 0, 0), z_dir=(0, 0, -1))) as redondeo1_piece_20_section:
        with BuildLine():
            CenterArc((REDONDEO1_R, -REDONDEO1_R), REDONDEO1_R, 90, 90)
            Line((0, -REDONDEO1_R), (0, 0))
            Line((0, 0), (REDONDEO1_R, 0))
        make_face()
    redondeo1_piece_20 = extrude(amount=8.75, mode=Mode.PRIVATE)
    redondeo1_piece_20 = split(redondeo1_piece_20, bisect_by=Plane(origin=(9.866987013, 14.226293308, 5), z_dir=(0, 0, -1)), keep=Keep.TOP, mode=Mode.PRIVATE)
    redondeo1_piece_20 = split(redondeo1_piece_20, bisect_by=Plane(origin=(9.792542992, 14.226293308, 4.694018457), z_dir=(0.4912379413342998, 0, 0.8710254215541813)), keep=Keep.TOP, mode=Mode.PRIVATE)
    add(redondeo1_piece_20)


solid = part.part
